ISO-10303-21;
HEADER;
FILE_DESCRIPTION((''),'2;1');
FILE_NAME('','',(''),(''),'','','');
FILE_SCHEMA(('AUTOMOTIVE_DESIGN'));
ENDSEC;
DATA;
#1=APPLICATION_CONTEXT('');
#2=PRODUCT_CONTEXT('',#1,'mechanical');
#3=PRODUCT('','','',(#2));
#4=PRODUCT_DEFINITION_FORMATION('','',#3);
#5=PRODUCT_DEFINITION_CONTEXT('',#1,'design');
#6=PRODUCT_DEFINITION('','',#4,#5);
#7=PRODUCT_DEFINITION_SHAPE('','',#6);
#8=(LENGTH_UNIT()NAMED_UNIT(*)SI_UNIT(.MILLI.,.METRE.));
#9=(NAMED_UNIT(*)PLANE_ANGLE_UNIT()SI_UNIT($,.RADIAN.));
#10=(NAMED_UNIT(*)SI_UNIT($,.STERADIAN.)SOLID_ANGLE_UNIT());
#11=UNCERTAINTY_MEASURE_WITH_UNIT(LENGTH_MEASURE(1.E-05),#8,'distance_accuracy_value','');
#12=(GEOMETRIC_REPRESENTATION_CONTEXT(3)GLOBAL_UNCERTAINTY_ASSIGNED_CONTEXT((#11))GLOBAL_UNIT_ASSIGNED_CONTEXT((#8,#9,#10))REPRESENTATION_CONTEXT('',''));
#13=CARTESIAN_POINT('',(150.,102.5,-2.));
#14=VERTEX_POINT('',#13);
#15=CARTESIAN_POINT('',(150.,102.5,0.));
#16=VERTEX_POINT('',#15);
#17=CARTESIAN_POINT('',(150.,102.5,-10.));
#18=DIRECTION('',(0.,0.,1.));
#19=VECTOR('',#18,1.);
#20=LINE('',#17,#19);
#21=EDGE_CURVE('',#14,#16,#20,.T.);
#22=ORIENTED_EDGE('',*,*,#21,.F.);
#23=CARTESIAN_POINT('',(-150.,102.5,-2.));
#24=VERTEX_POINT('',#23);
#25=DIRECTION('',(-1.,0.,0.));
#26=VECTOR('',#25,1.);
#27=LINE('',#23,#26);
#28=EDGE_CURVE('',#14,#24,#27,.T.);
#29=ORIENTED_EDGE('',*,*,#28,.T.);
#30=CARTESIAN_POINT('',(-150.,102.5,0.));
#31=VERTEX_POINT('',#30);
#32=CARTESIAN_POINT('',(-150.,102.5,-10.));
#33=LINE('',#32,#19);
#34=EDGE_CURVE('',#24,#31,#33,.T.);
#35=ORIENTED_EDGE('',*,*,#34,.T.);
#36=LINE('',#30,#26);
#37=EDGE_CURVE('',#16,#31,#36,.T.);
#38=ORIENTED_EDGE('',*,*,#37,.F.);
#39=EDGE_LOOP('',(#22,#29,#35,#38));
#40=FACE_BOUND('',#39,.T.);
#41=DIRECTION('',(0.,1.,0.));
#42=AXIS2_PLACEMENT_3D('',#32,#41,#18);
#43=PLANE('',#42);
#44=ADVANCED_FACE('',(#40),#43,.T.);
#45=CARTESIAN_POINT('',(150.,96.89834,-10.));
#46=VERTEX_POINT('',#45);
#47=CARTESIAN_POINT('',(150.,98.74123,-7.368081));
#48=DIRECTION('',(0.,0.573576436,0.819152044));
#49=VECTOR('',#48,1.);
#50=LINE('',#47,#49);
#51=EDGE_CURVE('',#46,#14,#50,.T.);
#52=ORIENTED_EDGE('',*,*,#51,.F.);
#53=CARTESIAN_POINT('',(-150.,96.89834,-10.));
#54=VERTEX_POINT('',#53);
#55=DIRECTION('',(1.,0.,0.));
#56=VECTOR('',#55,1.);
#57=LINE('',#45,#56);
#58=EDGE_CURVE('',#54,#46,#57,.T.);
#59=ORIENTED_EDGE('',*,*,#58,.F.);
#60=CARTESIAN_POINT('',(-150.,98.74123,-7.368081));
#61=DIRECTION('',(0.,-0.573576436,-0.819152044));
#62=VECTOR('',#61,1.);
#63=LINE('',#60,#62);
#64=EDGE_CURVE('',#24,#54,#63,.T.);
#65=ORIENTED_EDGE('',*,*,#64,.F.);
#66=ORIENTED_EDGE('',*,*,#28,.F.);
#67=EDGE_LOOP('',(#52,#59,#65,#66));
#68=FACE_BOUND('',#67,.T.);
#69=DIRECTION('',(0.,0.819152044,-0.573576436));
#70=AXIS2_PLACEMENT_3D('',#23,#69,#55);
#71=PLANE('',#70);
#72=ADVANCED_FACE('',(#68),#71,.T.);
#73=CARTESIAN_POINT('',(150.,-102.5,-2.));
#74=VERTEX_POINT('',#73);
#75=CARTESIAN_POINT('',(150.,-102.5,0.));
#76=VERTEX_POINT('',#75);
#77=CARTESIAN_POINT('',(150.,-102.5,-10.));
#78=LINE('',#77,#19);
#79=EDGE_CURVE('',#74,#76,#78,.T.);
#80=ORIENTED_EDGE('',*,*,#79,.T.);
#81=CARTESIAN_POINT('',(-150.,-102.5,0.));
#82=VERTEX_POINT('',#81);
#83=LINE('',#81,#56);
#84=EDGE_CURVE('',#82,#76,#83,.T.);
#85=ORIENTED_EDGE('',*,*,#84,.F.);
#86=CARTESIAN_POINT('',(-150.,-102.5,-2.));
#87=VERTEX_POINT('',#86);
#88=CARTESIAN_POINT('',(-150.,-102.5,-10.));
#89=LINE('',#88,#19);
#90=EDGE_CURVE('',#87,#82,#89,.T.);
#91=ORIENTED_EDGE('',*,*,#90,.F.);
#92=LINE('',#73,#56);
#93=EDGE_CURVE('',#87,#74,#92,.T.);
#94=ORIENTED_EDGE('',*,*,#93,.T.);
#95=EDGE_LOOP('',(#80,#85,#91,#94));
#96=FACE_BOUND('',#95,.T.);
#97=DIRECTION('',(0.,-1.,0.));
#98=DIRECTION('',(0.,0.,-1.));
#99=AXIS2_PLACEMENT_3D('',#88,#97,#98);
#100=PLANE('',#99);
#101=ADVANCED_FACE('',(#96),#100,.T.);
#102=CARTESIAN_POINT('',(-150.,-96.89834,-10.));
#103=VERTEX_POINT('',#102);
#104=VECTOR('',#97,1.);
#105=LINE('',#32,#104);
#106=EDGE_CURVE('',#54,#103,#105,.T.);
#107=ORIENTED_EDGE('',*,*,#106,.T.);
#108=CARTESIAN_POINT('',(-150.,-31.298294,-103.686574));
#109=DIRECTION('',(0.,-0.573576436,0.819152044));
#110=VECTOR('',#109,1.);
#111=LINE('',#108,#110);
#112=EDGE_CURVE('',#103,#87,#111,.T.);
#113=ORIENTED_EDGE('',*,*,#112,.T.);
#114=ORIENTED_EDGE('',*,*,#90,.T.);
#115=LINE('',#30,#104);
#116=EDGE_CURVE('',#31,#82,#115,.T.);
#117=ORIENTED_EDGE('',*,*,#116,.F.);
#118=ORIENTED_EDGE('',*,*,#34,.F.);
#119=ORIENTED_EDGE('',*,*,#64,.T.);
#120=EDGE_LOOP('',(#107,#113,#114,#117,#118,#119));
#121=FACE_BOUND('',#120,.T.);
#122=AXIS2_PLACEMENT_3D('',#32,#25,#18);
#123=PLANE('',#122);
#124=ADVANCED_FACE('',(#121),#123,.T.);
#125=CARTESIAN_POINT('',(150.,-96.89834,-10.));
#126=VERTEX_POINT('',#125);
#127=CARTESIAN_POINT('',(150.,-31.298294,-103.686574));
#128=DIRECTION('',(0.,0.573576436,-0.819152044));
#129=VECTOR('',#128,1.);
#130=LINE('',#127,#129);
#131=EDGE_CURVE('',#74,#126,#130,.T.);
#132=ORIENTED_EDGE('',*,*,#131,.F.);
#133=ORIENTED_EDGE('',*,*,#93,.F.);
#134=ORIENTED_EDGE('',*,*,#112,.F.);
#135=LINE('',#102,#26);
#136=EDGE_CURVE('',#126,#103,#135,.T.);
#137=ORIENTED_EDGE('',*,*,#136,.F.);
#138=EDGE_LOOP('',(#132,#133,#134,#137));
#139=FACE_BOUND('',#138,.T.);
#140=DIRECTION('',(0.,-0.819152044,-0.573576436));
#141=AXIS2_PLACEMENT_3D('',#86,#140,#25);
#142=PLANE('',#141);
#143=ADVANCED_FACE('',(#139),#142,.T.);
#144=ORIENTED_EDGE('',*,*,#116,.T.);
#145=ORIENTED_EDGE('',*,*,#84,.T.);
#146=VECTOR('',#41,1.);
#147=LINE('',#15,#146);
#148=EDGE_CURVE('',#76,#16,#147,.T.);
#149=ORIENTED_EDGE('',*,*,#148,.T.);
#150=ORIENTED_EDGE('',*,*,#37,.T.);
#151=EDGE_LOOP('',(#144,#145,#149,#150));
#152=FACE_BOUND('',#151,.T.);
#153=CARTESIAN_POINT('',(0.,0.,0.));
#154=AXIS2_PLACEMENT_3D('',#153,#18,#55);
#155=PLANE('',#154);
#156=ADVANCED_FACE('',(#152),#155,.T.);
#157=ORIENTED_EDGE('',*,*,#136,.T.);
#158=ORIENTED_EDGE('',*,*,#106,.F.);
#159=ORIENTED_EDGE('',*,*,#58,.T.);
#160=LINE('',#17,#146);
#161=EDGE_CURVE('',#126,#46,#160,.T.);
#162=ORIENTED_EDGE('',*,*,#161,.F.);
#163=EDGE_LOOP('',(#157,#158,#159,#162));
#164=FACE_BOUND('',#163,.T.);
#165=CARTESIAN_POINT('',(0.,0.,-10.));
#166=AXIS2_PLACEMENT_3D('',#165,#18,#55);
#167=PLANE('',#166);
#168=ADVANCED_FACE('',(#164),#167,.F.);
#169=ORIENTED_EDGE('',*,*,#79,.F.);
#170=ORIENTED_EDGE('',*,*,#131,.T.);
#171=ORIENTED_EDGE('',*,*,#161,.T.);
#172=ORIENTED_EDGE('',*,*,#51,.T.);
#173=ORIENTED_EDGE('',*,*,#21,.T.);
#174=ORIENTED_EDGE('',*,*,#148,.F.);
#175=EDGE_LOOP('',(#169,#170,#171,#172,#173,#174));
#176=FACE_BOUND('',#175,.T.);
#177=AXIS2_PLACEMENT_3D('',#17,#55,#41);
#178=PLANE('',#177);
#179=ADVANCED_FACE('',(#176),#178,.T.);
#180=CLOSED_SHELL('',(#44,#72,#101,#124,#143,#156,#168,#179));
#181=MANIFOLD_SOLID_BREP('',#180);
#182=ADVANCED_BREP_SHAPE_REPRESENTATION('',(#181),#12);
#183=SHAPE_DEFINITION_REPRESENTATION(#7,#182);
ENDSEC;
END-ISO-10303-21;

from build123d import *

# Parameters (mm, degrees)
SKETCH_1_W             = 300
SKETCH_1_H             = 205
SM_BASE_FLANGE_1_DEPTH = 10
CHAMFER_1_SIZE         = 8
CHAMFER_1_SIZE2        = 5.601660306
CHAMFER_2_SIZE         = 8
CHAMFER_2_SIZE2        = 5.601660306


# Sheet-metal steps are written as plain solids
with BuildPart() as part:
    # Sketch 1 → 基体-法兰1 (new body)
    with BuildSketch(Plane.XY):
        Rectangle(SKETCH_1_W, SKETCH_1_H)
    extrude(amount=-SM_BASE_FLANGE_1_DEPTH)

    # 倒角1
    chamfer_1_edges = [part.edges().sort_by_distance(p)[0] for p in [
        (0, 102.5, -10),
    ]]
    chamfer_1_side = [part.faces().sort_by_distance(p)[0] for p in [
        (0, 102.5, -5),
    ]]
    chamfer(chamfer_1_edges, length=CHAMFER_1_SIZE, length2=CHAMFER_1_SIZE2, reference=chamfer_1_side[0])

    # 倒角2
    chamfer_2_edges = [part.edges().sort_by_distance(p)[0] for p in [
        (0, -102.5, -10),
    ]]
    chamfer_2_side = [part.faces().sort_by_distance(p)[0] for p in [
        (0, -102.5, -5),
    ]]
    chamfer(chamfer_2_edges, length=CHAMFER_2_SIZE, length2=CHAMFER_2_SIZE2, reference=chamfer_2_side[0])


solid = part.part
